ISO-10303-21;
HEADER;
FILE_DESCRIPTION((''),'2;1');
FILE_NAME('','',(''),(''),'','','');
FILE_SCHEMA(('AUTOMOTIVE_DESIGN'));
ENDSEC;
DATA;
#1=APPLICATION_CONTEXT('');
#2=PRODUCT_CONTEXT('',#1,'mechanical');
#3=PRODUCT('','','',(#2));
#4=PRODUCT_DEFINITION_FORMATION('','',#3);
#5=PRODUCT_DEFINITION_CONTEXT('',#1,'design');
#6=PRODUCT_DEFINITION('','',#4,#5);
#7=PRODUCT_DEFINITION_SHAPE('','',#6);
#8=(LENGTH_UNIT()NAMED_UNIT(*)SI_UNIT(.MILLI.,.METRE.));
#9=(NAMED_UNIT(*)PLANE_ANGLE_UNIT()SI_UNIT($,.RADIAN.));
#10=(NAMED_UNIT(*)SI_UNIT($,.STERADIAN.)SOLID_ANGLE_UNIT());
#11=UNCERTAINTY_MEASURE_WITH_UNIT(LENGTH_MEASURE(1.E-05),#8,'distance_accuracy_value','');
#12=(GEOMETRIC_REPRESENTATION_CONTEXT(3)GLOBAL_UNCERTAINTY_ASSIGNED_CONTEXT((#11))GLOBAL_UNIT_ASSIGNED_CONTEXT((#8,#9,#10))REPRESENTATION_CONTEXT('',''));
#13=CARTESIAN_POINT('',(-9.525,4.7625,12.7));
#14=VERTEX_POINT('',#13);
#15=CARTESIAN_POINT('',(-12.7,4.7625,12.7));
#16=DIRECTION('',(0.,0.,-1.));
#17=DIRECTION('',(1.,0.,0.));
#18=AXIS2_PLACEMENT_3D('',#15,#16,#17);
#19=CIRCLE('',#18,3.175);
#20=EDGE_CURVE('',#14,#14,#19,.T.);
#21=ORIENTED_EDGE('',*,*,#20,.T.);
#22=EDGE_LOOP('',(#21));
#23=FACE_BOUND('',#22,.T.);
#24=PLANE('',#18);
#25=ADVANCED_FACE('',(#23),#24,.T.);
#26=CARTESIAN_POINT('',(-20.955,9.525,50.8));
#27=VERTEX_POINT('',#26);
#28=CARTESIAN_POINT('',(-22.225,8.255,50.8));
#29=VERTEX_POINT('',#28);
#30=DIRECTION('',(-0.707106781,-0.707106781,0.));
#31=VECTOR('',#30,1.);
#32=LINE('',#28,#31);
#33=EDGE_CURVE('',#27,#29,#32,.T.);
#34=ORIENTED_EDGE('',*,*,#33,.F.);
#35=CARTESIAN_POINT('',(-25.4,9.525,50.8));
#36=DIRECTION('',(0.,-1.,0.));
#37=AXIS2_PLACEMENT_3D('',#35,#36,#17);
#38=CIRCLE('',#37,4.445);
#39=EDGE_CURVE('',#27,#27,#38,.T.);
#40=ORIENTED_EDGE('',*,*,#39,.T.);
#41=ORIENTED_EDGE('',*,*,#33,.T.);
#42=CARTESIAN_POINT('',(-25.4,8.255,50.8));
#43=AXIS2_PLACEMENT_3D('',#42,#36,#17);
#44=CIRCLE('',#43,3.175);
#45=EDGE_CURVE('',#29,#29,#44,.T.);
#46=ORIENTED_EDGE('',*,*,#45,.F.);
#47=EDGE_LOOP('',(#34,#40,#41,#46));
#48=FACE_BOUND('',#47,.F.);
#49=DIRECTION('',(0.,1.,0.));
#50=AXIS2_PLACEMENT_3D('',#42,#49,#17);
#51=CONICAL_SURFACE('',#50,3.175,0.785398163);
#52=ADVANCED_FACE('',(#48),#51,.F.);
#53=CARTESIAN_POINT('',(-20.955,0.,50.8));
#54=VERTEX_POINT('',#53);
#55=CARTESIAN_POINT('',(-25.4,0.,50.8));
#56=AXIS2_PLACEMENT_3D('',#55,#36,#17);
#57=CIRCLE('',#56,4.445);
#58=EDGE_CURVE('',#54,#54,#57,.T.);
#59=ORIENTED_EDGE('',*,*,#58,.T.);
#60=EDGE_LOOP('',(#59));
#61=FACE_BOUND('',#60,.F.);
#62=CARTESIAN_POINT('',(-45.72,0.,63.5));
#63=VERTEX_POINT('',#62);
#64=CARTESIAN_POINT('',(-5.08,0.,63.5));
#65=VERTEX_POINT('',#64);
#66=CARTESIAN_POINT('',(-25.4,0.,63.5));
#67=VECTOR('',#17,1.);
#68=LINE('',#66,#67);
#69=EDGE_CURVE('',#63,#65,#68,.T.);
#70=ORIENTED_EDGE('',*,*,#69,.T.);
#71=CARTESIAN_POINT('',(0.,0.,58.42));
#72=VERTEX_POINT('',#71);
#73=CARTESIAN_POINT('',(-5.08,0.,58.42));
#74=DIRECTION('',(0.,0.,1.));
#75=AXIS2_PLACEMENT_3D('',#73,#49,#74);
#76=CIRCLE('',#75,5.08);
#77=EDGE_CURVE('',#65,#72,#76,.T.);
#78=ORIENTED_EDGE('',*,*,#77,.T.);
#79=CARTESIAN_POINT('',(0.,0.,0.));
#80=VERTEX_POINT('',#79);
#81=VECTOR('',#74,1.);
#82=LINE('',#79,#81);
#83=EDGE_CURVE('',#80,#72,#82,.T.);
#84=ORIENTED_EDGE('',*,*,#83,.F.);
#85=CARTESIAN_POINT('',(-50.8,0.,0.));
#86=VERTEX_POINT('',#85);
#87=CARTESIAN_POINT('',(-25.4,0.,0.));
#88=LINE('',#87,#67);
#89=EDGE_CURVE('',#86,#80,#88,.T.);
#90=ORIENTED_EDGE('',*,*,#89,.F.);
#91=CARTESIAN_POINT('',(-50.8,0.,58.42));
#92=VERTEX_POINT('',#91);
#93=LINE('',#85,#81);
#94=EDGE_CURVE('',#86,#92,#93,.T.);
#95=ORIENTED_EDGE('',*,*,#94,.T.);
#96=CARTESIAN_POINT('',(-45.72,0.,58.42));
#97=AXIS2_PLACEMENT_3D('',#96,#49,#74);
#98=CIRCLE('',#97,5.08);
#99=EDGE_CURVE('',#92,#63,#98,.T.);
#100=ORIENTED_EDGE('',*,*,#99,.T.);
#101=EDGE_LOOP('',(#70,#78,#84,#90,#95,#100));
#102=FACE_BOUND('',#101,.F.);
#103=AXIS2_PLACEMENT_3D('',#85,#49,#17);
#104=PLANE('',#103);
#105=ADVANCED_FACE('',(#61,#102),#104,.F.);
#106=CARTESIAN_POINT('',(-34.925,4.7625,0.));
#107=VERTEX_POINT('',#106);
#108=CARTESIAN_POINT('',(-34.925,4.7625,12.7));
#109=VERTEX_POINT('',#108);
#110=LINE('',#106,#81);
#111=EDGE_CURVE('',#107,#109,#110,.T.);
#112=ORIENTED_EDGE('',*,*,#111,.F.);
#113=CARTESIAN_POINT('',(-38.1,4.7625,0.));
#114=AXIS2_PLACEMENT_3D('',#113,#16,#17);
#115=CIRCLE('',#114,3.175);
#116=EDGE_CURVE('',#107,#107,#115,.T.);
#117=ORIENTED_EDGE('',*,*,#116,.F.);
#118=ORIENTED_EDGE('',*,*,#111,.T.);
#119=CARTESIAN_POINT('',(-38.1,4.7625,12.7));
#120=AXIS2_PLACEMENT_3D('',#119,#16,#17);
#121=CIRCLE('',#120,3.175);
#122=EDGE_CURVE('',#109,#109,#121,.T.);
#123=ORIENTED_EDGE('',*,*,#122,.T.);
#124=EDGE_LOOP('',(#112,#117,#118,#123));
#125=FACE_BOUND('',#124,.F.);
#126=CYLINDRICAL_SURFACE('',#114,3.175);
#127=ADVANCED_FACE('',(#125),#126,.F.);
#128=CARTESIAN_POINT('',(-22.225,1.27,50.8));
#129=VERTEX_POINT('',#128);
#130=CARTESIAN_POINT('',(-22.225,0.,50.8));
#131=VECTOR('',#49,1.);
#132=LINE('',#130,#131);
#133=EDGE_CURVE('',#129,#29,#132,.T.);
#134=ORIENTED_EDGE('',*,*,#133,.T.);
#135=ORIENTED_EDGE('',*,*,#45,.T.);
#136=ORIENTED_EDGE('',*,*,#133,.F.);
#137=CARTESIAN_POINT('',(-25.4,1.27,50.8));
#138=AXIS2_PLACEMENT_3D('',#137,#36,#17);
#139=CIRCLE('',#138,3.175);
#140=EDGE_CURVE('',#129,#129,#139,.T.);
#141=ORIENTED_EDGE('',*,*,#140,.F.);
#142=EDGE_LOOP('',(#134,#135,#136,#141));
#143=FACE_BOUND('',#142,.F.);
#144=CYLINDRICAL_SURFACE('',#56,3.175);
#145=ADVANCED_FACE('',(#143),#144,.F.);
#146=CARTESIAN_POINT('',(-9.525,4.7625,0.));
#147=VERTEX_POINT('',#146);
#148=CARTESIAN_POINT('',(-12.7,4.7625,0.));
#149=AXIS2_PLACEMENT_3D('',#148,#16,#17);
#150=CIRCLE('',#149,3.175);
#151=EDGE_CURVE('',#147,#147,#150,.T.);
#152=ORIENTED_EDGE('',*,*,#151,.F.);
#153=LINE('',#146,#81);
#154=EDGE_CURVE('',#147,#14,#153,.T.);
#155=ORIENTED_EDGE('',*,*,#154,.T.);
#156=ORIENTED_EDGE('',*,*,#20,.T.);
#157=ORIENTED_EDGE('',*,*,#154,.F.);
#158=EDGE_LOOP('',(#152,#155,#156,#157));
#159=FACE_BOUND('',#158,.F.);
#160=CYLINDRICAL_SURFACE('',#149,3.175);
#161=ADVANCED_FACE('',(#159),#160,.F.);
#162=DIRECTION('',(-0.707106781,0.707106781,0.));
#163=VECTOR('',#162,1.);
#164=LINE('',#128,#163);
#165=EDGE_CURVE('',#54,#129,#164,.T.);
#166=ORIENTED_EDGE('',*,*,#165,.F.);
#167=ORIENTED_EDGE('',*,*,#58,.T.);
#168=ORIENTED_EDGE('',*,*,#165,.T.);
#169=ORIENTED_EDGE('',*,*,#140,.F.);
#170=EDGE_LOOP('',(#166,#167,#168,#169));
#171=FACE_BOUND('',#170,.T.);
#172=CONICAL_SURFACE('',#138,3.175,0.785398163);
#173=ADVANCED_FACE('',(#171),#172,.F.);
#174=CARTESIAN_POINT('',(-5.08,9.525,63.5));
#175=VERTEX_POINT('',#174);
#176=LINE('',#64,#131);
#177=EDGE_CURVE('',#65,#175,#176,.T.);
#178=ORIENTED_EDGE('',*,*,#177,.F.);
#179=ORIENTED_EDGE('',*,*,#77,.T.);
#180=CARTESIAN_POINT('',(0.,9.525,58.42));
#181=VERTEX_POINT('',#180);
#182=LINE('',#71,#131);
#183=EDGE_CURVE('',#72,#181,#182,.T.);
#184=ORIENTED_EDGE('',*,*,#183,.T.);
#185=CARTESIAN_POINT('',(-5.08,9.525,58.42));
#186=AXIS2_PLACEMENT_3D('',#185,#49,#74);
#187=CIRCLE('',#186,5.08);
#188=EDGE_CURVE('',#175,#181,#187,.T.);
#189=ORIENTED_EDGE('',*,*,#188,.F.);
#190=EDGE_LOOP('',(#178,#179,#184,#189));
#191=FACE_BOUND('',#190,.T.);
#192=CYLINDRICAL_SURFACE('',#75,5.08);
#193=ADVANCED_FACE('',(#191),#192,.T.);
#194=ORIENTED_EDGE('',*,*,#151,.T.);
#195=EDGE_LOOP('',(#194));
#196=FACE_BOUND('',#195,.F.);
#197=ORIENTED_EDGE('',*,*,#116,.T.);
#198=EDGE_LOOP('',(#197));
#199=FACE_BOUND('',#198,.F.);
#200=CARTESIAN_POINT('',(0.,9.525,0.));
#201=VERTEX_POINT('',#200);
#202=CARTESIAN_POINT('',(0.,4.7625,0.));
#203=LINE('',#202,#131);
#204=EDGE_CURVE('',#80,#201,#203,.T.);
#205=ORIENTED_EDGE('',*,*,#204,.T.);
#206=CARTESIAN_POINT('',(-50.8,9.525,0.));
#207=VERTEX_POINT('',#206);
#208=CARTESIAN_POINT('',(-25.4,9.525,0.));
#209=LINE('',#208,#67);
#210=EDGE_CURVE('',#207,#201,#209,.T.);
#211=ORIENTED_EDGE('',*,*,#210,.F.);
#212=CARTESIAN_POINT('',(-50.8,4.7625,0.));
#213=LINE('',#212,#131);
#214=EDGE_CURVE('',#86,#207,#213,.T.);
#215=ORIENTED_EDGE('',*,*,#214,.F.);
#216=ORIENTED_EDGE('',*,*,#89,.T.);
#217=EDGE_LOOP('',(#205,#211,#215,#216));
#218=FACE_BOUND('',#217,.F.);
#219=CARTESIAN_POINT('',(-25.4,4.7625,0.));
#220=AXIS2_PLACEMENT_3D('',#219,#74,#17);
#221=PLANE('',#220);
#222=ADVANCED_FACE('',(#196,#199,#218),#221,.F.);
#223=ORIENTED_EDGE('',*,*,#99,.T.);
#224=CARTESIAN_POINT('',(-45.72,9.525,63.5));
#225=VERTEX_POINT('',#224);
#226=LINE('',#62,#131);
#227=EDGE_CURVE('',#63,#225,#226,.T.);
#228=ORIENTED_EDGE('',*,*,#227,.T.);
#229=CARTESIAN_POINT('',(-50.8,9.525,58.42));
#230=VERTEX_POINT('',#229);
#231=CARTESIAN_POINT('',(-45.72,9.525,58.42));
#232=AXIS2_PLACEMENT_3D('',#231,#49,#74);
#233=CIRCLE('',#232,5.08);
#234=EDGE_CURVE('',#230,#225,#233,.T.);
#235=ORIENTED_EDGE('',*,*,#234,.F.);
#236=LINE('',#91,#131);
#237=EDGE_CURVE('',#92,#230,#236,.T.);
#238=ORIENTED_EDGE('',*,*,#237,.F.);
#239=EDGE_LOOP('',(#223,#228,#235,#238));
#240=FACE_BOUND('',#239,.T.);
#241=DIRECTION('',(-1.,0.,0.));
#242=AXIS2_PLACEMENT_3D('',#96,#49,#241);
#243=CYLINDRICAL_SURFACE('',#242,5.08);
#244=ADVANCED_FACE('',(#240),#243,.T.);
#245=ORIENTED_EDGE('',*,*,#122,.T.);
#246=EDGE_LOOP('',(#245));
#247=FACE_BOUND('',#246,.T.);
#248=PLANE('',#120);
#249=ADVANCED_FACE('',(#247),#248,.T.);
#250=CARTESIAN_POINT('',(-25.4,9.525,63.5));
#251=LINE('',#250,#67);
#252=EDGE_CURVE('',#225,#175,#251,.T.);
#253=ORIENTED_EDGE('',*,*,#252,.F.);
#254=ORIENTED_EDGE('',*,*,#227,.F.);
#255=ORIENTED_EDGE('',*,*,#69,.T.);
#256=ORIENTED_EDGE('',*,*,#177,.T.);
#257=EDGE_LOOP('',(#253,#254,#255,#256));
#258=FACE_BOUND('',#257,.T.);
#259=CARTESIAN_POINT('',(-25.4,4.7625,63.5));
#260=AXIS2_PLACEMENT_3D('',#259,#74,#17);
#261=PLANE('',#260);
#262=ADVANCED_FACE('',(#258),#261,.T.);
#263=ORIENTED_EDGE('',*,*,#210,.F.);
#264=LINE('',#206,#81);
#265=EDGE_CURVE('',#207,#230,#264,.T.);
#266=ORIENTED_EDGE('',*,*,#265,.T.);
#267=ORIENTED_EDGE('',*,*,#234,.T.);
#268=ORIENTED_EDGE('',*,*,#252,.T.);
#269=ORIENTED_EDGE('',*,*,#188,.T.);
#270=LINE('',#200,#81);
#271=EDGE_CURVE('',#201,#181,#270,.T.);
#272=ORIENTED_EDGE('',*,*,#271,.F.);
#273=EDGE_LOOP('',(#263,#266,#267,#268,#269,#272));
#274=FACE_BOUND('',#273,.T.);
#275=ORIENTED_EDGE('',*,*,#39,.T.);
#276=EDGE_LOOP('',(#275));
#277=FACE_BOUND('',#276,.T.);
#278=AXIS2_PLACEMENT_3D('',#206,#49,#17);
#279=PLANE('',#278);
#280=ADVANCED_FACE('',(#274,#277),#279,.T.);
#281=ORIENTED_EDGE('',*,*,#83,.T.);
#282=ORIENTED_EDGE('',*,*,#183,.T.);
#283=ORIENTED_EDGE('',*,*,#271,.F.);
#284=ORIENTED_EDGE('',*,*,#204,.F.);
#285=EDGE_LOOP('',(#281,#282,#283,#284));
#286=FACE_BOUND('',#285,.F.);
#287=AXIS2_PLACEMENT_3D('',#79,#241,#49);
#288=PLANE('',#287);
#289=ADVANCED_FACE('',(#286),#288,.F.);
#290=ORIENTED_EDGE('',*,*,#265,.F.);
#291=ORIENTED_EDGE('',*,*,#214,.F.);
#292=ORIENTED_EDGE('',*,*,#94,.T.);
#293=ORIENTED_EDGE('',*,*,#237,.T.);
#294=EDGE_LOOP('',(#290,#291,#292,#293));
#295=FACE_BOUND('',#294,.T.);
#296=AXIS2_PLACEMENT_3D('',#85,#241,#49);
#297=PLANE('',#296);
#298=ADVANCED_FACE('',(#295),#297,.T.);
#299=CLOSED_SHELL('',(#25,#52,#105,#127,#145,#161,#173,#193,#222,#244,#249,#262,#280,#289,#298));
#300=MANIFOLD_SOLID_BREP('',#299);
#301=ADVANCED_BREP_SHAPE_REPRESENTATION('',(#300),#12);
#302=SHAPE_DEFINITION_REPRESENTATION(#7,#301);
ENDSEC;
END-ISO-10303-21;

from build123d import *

# Parameters (mm, degrees)
F0_W     = 50.8
F0_H     = 9.525
F1_DEPTH = 63.5
F2_R     = 3.175
F3_DEPTH = 9.525
F4_R     = 3.175
F5_DEPTH = 12.7
F6_R     = 5.08
F7_SIZE  = 1.27


# Not quite as in the source:
# - a length typed as a fraction of an inch, garbled in the dataset ("3 / 203.2 mm" for 3/8 in), is restored


with BuildPart() as f1:
    # F0 (on Top) → F1 (new body)
    with BuildSketch(Plane.XY):
        with Locations((-25.4, 4.7625)):
            Rectangle(F0_W, F0_H)
    extrude(amount=F1_DEPTH)

    # F2 (on face) → F3 (cut)
    with BuildSketch(Plane.XZ):
        with Locations((-25.4, 50.8)):
            Circle(F2_R)
    extrude(amount=-F3_DEPTH, mode=Mode.SUBTRACT)

    # F4 (on face) → F5 (cut)
    with BuildSketch(Plane(origin=(0, 0, 0), x_dir=(1, 0, 0), z_dir=(0, 0, -1))):
        with Locations((-38.1, -4.7625)):
            Circle(F4_R)
        with Locations((-12.7, -4.7625)):
            Circle(F4_R)
    extrude(amount=-F5_DEPTH, mode=Mode.SUBTRACT)

    # F6
    f6_edges = [f1.edges().sort_by_distance(p)[0] for p in [
        (-50.8, 4.7625, 63.5),
        (0, 4.7625, 63.5),
    ]]
    fillet(f6_edges, radius=F6_R)

    # F7
    f7_edges = [f1.edges().sort_by_distance(p)[0] for p in [
        (-28.575, 0, 50.8),
        (-28.575, 9.525, 50.8),
    ]]
    chamfer(f7_edges, length=F7_SIZE)


solid = f1.part
